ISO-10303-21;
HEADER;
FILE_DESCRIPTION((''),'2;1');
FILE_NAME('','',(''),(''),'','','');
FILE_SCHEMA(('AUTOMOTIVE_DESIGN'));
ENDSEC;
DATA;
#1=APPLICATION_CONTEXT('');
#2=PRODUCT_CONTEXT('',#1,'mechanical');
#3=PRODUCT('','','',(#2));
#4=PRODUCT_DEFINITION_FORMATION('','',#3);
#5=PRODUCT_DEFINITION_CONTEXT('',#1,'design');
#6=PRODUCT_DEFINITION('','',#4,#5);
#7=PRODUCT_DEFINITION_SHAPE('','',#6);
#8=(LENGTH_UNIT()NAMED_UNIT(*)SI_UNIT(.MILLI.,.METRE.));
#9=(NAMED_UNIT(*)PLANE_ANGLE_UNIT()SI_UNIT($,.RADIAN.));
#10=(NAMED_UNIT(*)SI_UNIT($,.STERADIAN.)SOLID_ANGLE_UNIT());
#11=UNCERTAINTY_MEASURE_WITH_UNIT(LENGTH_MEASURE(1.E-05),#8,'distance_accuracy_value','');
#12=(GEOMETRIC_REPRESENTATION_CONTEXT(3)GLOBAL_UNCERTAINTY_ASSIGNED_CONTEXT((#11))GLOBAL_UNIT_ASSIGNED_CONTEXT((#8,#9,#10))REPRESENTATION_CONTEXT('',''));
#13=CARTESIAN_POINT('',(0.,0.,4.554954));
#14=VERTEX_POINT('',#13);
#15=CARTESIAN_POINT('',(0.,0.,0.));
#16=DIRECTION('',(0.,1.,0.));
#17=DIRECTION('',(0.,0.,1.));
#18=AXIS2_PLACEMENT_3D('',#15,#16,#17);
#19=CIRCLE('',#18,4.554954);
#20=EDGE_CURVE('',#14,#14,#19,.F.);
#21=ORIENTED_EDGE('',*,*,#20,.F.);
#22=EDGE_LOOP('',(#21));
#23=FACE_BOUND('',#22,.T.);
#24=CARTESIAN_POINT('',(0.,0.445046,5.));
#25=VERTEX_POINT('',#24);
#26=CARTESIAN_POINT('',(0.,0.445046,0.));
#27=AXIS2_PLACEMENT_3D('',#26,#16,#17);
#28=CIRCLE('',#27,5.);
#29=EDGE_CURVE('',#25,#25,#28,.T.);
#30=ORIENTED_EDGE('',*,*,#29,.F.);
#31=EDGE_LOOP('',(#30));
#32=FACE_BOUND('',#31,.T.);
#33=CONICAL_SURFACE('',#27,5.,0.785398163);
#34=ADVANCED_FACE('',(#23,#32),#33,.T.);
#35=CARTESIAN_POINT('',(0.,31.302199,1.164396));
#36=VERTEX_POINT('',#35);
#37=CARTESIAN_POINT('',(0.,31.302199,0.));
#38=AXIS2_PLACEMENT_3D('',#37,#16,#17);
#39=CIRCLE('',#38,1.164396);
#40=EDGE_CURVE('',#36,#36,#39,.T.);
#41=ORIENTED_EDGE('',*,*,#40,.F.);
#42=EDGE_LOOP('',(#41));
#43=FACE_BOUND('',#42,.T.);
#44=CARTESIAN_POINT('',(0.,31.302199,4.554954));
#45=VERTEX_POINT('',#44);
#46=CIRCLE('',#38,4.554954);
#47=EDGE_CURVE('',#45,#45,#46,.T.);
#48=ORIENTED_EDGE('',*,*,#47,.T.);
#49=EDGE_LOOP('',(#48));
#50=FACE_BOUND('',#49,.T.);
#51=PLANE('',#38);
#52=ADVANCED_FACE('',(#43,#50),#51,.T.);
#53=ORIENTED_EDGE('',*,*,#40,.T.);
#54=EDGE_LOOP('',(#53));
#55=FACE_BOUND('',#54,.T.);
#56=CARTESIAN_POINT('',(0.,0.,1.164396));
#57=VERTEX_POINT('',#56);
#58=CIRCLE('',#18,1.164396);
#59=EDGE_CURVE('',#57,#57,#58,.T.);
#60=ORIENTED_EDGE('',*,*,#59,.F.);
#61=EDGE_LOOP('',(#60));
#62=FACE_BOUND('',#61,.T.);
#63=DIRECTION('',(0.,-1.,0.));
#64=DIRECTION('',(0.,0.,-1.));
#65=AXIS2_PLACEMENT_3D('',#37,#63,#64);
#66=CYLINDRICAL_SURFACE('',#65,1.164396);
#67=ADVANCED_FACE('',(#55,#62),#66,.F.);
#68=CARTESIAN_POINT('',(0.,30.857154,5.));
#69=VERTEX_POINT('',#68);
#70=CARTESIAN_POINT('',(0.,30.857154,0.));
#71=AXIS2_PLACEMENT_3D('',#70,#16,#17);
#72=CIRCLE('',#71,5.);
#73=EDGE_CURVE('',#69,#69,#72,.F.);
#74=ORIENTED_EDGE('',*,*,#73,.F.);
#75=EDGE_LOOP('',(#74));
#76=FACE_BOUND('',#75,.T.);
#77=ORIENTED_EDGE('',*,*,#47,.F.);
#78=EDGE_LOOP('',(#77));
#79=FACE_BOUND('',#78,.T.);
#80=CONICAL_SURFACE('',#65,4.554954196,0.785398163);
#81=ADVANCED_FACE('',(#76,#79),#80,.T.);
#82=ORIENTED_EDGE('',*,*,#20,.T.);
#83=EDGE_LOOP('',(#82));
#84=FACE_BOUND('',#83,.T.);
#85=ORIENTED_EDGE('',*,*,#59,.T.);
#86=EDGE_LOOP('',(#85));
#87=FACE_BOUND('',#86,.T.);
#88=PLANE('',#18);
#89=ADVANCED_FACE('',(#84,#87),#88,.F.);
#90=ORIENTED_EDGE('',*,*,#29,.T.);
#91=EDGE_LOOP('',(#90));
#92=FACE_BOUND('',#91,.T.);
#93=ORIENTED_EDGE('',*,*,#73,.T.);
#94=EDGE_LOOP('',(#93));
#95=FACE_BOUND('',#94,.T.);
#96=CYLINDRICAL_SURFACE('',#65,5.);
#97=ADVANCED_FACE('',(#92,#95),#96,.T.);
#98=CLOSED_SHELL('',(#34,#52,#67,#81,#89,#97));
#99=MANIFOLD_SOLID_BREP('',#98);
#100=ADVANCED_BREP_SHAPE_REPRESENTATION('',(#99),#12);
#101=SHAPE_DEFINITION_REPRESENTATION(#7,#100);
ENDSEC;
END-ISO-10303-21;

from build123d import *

# Parameters (mm, degrees)
SKETCH1_R           = 5
BOSS_EXTRUDE1_DEPTH = 31.302199411
SKETCH2_R           = 1.164396009
CUT_EXTRUDE1_DEPTH  = 33.090928437
CHAMFER1_SIZE       = 0.445045804


with BuildPart() as part:
    # Sketch1 → Boss-Extrude1 (new body)
    with BuildSketch(Plane(origin=(0, 0, 0), x_dir=(1, 0, 0), z_dir=(0, 1, 0))):
        Circle(SKETCH1_R)
    extrude(amount=BOSS_EXTRUDE1_DEPTH)

    # Sketch2 → Cut-Extrude1 (cut, through all)
    with BuildSketch(Plane(origin=(0, 0, 0), x_dir=(1, 0, 0), z_dir=(0, 1, 0))):
        Circle(SKETCH2_R)
    extrude(amount=CUT_EXTRUDE1_DEPTH, mode=Mode.SUBTRACT)

    # Chamfer1
    chamfer1_edges = [part.edges().sort_by_distance(p)[0] for p in [
        (-5, 31.302199411, 0),
        (-5, 0, 0),
    ]]
    chamfer(chamfer1_edges, length=CHAMFER1_SIZE)


solid = part.part
